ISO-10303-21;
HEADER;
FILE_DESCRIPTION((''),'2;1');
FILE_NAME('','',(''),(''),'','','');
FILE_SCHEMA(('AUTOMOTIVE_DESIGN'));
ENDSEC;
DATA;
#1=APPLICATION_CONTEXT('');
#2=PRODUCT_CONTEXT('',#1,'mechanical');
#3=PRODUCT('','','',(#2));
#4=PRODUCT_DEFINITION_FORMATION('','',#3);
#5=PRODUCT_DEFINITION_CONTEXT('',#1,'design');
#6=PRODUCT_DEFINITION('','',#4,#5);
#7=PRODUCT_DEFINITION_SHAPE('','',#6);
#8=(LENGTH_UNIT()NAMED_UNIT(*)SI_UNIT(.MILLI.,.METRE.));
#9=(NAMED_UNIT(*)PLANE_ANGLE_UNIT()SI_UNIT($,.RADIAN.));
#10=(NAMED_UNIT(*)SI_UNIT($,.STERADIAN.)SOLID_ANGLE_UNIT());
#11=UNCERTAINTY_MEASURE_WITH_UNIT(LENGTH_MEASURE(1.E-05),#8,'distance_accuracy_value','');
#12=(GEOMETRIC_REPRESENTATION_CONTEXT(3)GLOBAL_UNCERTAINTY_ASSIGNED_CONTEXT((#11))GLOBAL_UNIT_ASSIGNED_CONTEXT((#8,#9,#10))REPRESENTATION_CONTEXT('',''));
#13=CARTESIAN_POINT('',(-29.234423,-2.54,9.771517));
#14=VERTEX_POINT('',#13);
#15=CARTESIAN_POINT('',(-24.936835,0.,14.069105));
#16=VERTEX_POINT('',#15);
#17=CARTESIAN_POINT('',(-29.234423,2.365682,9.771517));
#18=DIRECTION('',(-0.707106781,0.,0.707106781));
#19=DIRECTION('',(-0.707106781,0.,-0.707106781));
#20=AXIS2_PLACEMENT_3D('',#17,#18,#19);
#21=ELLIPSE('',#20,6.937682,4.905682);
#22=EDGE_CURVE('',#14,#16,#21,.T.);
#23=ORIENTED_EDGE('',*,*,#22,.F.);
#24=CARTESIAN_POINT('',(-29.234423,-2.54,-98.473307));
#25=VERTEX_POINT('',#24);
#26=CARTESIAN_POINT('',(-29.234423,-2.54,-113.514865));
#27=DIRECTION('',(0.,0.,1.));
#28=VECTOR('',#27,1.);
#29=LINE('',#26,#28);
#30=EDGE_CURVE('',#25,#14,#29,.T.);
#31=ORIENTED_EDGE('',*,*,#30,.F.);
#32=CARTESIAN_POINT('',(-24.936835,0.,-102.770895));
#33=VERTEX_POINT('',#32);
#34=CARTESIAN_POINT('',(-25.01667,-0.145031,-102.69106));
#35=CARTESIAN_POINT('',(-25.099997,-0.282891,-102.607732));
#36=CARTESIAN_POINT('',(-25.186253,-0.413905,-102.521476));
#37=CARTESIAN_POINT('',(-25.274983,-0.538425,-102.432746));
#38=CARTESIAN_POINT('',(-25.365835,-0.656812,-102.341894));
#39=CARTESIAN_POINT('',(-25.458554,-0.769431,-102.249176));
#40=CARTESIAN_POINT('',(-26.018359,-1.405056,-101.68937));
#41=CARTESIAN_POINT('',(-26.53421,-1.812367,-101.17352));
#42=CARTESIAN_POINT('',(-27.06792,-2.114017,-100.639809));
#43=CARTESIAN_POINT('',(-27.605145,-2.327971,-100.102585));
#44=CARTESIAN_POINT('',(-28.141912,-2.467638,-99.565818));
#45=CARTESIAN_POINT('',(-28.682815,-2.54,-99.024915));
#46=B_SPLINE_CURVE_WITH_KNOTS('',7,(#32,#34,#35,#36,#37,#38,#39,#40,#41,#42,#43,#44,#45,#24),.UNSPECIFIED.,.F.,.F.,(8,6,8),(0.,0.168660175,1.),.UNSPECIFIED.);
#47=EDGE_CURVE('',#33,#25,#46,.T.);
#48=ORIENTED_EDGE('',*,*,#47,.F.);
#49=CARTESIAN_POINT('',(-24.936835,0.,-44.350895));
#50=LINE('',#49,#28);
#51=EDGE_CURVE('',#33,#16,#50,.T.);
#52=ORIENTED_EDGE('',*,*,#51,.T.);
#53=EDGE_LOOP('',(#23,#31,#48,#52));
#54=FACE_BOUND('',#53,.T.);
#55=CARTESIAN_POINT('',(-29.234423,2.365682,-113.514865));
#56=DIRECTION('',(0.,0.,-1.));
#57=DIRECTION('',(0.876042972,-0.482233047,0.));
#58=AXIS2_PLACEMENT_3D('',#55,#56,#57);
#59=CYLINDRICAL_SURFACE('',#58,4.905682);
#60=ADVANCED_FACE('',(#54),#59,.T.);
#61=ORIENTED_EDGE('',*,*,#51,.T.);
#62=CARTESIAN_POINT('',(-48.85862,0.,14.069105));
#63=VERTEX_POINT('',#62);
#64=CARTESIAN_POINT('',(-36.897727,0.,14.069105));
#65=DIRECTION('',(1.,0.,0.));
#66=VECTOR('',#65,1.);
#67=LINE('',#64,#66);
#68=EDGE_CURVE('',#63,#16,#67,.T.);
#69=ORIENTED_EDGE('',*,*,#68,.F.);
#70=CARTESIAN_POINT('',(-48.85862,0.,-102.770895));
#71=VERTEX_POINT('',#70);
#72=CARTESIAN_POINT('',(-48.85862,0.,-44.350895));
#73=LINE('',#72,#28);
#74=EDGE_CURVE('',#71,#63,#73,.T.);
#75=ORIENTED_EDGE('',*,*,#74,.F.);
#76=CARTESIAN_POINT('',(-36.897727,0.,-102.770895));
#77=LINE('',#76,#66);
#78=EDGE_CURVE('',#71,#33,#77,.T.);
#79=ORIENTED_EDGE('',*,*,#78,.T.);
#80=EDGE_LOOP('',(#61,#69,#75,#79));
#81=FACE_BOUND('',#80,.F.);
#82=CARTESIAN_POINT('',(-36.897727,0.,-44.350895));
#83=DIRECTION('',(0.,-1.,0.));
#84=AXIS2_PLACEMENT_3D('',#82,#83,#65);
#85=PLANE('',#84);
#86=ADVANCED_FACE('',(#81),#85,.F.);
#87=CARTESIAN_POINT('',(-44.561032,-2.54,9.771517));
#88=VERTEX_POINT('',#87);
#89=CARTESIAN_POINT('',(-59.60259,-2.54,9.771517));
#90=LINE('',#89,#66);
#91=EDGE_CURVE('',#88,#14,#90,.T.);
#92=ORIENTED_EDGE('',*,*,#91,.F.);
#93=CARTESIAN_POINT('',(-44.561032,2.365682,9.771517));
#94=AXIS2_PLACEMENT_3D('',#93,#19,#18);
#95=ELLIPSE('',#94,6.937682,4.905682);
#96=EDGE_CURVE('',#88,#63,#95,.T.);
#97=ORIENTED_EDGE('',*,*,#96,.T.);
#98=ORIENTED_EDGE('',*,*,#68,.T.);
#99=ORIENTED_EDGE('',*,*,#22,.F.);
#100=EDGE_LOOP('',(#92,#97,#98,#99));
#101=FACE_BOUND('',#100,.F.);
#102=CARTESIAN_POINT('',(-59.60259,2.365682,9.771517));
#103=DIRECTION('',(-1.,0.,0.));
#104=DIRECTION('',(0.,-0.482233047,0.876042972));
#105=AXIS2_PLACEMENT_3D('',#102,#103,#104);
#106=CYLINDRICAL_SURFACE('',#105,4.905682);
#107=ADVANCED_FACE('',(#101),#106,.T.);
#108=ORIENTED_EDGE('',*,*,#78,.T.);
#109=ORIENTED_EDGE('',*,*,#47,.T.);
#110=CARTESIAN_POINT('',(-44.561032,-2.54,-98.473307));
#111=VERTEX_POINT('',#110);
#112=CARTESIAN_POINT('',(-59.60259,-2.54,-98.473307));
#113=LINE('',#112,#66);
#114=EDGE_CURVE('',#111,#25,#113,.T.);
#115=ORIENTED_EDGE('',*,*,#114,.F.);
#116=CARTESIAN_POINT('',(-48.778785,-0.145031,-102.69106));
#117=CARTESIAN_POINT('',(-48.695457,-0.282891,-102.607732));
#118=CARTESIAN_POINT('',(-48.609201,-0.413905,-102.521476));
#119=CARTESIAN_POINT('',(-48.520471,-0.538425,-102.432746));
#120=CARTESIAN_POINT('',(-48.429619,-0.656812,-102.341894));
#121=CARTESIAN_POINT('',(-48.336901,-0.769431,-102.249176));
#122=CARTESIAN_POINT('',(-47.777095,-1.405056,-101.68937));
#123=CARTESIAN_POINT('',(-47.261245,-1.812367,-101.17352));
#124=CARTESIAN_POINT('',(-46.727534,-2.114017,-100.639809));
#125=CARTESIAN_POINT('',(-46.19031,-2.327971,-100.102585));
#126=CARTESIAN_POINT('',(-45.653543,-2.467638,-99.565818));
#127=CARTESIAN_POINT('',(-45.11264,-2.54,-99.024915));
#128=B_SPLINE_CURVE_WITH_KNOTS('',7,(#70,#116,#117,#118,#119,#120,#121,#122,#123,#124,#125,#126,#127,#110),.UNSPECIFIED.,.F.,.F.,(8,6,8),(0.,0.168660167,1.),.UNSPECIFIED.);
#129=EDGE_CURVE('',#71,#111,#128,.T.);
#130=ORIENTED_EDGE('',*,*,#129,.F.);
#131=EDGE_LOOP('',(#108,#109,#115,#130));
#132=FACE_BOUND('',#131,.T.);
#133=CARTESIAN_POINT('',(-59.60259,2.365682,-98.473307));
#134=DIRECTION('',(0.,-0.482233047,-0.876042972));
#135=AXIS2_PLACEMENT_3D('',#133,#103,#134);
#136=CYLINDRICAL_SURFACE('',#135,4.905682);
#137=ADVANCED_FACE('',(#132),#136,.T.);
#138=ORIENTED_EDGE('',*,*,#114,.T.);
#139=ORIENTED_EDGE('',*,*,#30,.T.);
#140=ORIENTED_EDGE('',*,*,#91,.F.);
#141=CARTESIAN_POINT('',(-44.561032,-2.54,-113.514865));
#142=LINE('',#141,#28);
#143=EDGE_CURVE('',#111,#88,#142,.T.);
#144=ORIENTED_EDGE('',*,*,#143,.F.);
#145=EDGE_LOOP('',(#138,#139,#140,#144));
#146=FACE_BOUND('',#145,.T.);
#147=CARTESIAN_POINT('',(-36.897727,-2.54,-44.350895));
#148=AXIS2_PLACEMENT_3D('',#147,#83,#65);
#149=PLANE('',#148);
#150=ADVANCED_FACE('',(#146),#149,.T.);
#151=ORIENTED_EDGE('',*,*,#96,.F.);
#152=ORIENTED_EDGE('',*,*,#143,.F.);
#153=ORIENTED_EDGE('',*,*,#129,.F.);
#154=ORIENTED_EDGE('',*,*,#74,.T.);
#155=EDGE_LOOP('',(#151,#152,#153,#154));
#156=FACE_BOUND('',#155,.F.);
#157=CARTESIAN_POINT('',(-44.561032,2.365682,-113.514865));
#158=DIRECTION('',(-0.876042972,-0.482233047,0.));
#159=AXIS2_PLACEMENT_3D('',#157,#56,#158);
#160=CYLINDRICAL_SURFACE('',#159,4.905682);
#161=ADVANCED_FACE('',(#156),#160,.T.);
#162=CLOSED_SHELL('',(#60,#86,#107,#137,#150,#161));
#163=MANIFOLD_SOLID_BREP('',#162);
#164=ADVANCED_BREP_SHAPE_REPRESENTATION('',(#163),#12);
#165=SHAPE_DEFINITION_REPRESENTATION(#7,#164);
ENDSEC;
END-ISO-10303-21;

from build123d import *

# Parameters (mm, degrees)
F0_W        = 23.9217849086
F0_H        = 116.84
F1_DEPTH    = 2.54
F2_T1_DEPTH = 45.4097259166
F2_T3_DEPTH = 138.3279410079


# Not quite as in the source:
# - a fillet or chamfer that OpenCascade refuses, or shapes differently, is made with other operations: its cross-section is extruded or revolved along the edge and cut away or added


with BuildPart() as f1:
    # F0 (on Front) → F1 (new body)
    with BuildSketch(Plane.XZ):
        with Locations((-36.8977272883, -44.3508948228)):
            Rectangle(F0_W, F0_H)
    extrude(amount=F1_DEPTH)

    # F2: fillet of radius 4.9056819587 on 4 edges, made by hand

    # F2_s2 → F2_t1 (cut)
    with BuildSketch(Plane.YZ.offset(-59.6025902466)):
        with BuildLine():
            ThreePointArc((0, 14.0691051772), (-1.8575276492, 12.267557057), (-2.54, 9.7715169756))
            Line((-2.54, 9.7715169756), (-2.54, 14.0691051772))
            Line((-2.54, 14.0691051772), (0, 14.0691051772))
        make_face()
        with BuildLine():
            ThreePointArc((0, -102.7708948228), (-1.8575276492, -100.9693467025), (-2.54, -98.4733066212))
            Line((-2.54, -98.4733066212), (-2.54, -102.7708948228))
            Line((-2.54, -102.7708948228), (0, -102.7708948228))
        make_face()
    extrude(amount=F2_T1_DEPTH, mode=Mode.SUBTRACT)

    # F2_s4 → F2_t3 (cut)
    with BuildSketch(Plane.XY.offset(-113.5148653268)):
        with BuildLine():
            ThreePointArc((-48.8586197426, 0), (-47.0570716224, -1.8575276492), (-44.561031541, -2.54))
            Line((-44.561031541, -2.54), (-48.8586197426, -2.54))
            Line((-48.8586197426, -2.54), (-48.8586197426, 0))
        make_face()
        with BuildLine():
            ThreePointArc((-24.936834834, 0), (-26.7383829542, -1.8575276492), (-29.2344230356, -2.54))
            Line((-29.2344230356, -2.54), (-24.936834834, -2.54))
            Line((-24.936834834, -2.54), (-24.936834834, 0))
        make_face()
    extrude(amount=F2_T3_DEPTH, mode=Mode.SUBTRACT)


solid = f1.part
